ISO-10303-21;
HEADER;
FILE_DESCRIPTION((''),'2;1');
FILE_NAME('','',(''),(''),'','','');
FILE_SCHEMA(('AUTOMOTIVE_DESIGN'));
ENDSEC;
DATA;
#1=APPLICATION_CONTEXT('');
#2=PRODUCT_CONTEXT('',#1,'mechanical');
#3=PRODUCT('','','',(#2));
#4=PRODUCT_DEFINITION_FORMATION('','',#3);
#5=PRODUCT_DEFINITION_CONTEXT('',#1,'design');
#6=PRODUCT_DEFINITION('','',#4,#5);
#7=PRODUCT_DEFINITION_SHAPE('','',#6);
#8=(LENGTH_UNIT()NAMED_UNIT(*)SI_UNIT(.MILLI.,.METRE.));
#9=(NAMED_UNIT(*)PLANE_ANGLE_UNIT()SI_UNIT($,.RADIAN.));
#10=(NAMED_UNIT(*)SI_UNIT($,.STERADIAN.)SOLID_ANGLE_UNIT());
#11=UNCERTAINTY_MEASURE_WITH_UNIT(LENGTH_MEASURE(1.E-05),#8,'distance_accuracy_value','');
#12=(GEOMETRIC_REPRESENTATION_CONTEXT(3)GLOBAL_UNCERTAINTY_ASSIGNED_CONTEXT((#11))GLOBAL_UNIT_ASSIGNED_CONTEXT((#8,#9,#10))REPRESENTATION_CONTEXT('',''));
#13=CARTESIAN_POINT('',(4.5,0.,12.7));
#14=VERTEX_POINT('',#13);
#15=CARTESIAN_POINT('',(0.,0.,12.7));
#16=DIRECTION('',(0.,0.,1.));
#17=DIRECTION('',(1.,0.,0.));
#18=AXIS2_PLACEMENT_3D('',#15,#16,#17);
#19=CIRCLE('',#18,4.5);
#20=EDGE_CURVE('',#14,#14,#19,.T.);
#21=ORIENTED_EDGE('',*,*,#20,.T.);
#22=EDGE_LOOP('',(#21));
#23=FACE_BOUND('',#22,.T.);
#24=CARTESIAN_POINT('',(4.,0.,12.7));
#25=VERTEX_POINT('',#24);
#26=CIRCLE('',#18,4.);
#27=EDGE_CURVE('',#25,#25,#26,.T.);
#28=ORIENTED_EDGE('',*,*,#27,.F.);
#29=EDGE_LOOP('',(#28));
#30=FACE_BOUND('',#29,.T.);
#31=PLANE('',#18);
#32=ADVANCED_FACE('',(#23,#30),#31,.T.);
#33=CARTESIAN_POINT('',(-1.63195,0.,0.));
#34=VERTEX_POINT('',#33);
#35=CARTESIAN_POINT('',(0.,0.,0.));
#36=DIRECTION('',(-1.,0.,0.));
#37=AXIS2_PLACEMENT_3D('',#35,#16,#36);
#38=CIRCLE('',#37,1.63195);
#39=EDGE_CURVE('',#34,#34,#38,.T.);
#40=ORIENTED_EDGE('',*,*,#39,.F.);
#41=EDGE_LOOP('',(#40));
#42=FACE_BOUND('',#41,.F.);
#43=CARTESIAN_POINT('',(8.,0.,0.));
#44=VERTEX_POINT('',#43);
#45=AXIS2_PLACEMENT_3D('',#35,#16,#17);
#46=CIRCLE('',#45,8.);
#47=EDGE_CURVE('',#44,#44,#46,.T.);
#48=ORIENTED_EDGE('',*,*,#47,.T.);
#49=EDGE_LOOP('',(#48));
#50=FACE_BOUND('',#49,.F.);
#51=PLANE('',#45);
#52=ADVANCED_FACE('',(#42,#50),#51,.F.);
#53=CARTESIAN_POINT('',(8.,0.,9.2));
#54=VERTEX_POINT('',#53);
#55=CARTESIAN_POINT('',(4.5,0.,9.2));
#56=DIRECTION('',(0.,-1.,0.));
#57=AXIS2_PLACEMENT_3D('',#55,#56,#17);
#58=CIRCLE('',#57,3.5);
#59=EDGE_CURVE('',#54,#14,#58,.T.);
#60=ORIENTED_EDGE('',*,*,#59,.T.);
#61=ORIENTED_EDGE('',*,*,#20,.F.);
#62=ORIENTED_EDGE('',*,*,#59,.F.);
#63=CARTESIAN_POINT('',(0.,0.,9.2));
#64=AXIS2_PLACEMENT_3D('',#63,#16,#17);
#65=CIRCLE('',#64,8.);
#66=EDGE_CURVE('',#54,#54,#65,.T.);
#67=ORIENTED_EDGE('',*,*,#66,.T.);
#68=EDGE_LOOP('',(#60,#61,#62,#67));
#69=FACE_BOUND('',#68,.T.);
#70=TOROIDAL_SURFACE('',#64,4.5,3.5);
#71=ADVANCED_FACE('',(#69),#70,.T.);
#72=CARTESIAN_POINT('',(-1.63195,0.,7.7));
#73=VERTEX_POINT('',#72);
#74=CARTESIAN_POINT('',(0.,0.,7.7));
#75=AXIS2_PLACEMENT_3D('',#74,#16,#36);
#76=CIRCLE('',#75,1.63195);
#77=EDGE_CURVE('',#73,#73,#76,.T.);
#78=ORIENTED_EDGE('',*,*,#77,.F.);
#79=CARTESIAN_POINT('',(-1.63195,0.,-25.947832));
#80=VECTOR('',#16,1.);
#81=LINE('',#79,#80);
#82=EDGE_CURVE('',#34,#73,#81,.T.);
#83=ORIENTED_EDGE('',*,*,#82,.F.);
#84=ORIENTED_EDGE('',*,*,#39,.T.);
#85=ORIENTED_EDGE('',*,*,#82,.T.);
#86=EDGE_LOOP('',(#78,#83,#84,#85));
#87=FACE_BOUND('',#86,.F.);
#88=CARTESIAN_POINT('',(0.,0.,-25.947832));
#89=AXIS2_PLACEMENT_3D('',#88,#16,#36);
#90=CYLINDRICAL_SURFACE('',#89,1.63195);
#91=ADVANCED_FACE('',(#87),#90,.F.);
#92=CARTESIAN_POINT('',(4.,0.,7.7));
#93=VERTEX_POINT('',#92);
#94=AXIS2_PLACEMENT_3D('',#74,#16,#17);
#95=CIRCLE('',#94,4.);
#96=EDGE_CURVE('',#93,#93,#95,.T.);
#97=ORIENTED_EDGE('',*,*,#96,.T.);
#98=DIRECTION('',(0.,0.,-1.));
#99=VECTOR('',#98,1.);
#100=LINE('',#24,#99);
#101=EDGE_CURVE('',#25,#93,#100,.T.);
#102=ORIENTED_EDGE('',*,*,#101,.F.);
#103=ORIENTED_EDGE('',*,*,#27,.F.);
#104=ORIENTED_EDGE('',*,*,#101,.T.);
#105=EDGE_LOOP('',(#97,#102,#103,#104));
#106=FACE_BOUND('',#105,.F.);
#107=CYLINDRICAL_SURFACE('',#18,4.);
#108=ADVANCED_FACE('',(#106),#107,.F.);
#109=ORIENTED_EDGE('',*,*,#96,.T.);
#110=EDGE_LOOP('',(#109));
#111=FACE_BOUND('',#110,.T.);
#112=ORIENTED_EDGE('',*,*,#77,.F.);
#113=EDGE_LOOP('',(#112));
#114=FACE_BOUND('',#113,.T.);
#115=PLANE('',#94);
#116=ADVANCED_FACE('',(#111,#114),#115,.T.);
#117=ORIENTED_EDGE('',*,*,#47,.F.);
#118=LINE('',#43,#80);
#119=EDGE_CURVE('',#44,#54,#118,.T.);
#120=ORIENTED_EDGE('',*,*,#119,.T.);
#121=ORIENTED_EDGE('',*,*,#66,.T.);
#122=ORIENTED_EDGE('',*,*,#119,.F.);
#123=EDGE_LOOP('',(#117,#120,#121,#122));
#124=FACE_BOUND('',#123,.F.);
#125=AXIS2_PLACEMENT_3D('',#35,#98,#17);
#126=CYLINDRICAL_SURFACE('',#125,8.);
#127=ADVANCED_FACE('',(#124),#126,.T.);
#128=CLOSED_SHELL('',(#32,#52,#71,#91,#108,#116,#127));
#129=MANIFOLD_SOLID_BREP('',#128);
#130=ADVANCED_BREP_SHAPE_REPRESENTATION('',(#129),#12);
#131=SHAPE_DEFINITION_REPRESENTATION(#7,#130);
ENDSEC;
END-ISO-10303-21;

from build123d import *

# Parameters (mm, degrees)
F0_R     = 8
F1_DEPTH = 12.7
F2_R     = 4
F3_DEPTH = 5
F4_D     = 3.2639
F5_R     = 3.5


# Not quite as in the source:
# - a feature names something its author has since deleted; it is built from what else it names


with BuildPart() as f1:
    # F0 (on Top) → F1 (new body)
    with BuildSketch(Plane.XY):
        Circle(F0_R)
    extrude(amount=F1_DEPTH)

    # F2 (on face) → F3 (cut)
    with BuildSketch(Plane.XY.offset(12.7)):
        Circle(F2_R)
    extrude(amount=-F3_DEPTH, mode=Mode.SUBTRACT)

    # F4 (through all)
    with Locations(Plane(origin=(0, 0, 0), x_dir=(1, 0, 0), z_dir=(0, 0, -1))):
        with Locations((0, 0)):
            Hole(F4_D / 2)

    # F5
    f5_edges = [f1.edges().sort_by_distance(p)[0] for p in [
        (-8, 0, 12.7),
    ]]
    fillet(f5_edges, radius=F5_R)


solid = f1.part
